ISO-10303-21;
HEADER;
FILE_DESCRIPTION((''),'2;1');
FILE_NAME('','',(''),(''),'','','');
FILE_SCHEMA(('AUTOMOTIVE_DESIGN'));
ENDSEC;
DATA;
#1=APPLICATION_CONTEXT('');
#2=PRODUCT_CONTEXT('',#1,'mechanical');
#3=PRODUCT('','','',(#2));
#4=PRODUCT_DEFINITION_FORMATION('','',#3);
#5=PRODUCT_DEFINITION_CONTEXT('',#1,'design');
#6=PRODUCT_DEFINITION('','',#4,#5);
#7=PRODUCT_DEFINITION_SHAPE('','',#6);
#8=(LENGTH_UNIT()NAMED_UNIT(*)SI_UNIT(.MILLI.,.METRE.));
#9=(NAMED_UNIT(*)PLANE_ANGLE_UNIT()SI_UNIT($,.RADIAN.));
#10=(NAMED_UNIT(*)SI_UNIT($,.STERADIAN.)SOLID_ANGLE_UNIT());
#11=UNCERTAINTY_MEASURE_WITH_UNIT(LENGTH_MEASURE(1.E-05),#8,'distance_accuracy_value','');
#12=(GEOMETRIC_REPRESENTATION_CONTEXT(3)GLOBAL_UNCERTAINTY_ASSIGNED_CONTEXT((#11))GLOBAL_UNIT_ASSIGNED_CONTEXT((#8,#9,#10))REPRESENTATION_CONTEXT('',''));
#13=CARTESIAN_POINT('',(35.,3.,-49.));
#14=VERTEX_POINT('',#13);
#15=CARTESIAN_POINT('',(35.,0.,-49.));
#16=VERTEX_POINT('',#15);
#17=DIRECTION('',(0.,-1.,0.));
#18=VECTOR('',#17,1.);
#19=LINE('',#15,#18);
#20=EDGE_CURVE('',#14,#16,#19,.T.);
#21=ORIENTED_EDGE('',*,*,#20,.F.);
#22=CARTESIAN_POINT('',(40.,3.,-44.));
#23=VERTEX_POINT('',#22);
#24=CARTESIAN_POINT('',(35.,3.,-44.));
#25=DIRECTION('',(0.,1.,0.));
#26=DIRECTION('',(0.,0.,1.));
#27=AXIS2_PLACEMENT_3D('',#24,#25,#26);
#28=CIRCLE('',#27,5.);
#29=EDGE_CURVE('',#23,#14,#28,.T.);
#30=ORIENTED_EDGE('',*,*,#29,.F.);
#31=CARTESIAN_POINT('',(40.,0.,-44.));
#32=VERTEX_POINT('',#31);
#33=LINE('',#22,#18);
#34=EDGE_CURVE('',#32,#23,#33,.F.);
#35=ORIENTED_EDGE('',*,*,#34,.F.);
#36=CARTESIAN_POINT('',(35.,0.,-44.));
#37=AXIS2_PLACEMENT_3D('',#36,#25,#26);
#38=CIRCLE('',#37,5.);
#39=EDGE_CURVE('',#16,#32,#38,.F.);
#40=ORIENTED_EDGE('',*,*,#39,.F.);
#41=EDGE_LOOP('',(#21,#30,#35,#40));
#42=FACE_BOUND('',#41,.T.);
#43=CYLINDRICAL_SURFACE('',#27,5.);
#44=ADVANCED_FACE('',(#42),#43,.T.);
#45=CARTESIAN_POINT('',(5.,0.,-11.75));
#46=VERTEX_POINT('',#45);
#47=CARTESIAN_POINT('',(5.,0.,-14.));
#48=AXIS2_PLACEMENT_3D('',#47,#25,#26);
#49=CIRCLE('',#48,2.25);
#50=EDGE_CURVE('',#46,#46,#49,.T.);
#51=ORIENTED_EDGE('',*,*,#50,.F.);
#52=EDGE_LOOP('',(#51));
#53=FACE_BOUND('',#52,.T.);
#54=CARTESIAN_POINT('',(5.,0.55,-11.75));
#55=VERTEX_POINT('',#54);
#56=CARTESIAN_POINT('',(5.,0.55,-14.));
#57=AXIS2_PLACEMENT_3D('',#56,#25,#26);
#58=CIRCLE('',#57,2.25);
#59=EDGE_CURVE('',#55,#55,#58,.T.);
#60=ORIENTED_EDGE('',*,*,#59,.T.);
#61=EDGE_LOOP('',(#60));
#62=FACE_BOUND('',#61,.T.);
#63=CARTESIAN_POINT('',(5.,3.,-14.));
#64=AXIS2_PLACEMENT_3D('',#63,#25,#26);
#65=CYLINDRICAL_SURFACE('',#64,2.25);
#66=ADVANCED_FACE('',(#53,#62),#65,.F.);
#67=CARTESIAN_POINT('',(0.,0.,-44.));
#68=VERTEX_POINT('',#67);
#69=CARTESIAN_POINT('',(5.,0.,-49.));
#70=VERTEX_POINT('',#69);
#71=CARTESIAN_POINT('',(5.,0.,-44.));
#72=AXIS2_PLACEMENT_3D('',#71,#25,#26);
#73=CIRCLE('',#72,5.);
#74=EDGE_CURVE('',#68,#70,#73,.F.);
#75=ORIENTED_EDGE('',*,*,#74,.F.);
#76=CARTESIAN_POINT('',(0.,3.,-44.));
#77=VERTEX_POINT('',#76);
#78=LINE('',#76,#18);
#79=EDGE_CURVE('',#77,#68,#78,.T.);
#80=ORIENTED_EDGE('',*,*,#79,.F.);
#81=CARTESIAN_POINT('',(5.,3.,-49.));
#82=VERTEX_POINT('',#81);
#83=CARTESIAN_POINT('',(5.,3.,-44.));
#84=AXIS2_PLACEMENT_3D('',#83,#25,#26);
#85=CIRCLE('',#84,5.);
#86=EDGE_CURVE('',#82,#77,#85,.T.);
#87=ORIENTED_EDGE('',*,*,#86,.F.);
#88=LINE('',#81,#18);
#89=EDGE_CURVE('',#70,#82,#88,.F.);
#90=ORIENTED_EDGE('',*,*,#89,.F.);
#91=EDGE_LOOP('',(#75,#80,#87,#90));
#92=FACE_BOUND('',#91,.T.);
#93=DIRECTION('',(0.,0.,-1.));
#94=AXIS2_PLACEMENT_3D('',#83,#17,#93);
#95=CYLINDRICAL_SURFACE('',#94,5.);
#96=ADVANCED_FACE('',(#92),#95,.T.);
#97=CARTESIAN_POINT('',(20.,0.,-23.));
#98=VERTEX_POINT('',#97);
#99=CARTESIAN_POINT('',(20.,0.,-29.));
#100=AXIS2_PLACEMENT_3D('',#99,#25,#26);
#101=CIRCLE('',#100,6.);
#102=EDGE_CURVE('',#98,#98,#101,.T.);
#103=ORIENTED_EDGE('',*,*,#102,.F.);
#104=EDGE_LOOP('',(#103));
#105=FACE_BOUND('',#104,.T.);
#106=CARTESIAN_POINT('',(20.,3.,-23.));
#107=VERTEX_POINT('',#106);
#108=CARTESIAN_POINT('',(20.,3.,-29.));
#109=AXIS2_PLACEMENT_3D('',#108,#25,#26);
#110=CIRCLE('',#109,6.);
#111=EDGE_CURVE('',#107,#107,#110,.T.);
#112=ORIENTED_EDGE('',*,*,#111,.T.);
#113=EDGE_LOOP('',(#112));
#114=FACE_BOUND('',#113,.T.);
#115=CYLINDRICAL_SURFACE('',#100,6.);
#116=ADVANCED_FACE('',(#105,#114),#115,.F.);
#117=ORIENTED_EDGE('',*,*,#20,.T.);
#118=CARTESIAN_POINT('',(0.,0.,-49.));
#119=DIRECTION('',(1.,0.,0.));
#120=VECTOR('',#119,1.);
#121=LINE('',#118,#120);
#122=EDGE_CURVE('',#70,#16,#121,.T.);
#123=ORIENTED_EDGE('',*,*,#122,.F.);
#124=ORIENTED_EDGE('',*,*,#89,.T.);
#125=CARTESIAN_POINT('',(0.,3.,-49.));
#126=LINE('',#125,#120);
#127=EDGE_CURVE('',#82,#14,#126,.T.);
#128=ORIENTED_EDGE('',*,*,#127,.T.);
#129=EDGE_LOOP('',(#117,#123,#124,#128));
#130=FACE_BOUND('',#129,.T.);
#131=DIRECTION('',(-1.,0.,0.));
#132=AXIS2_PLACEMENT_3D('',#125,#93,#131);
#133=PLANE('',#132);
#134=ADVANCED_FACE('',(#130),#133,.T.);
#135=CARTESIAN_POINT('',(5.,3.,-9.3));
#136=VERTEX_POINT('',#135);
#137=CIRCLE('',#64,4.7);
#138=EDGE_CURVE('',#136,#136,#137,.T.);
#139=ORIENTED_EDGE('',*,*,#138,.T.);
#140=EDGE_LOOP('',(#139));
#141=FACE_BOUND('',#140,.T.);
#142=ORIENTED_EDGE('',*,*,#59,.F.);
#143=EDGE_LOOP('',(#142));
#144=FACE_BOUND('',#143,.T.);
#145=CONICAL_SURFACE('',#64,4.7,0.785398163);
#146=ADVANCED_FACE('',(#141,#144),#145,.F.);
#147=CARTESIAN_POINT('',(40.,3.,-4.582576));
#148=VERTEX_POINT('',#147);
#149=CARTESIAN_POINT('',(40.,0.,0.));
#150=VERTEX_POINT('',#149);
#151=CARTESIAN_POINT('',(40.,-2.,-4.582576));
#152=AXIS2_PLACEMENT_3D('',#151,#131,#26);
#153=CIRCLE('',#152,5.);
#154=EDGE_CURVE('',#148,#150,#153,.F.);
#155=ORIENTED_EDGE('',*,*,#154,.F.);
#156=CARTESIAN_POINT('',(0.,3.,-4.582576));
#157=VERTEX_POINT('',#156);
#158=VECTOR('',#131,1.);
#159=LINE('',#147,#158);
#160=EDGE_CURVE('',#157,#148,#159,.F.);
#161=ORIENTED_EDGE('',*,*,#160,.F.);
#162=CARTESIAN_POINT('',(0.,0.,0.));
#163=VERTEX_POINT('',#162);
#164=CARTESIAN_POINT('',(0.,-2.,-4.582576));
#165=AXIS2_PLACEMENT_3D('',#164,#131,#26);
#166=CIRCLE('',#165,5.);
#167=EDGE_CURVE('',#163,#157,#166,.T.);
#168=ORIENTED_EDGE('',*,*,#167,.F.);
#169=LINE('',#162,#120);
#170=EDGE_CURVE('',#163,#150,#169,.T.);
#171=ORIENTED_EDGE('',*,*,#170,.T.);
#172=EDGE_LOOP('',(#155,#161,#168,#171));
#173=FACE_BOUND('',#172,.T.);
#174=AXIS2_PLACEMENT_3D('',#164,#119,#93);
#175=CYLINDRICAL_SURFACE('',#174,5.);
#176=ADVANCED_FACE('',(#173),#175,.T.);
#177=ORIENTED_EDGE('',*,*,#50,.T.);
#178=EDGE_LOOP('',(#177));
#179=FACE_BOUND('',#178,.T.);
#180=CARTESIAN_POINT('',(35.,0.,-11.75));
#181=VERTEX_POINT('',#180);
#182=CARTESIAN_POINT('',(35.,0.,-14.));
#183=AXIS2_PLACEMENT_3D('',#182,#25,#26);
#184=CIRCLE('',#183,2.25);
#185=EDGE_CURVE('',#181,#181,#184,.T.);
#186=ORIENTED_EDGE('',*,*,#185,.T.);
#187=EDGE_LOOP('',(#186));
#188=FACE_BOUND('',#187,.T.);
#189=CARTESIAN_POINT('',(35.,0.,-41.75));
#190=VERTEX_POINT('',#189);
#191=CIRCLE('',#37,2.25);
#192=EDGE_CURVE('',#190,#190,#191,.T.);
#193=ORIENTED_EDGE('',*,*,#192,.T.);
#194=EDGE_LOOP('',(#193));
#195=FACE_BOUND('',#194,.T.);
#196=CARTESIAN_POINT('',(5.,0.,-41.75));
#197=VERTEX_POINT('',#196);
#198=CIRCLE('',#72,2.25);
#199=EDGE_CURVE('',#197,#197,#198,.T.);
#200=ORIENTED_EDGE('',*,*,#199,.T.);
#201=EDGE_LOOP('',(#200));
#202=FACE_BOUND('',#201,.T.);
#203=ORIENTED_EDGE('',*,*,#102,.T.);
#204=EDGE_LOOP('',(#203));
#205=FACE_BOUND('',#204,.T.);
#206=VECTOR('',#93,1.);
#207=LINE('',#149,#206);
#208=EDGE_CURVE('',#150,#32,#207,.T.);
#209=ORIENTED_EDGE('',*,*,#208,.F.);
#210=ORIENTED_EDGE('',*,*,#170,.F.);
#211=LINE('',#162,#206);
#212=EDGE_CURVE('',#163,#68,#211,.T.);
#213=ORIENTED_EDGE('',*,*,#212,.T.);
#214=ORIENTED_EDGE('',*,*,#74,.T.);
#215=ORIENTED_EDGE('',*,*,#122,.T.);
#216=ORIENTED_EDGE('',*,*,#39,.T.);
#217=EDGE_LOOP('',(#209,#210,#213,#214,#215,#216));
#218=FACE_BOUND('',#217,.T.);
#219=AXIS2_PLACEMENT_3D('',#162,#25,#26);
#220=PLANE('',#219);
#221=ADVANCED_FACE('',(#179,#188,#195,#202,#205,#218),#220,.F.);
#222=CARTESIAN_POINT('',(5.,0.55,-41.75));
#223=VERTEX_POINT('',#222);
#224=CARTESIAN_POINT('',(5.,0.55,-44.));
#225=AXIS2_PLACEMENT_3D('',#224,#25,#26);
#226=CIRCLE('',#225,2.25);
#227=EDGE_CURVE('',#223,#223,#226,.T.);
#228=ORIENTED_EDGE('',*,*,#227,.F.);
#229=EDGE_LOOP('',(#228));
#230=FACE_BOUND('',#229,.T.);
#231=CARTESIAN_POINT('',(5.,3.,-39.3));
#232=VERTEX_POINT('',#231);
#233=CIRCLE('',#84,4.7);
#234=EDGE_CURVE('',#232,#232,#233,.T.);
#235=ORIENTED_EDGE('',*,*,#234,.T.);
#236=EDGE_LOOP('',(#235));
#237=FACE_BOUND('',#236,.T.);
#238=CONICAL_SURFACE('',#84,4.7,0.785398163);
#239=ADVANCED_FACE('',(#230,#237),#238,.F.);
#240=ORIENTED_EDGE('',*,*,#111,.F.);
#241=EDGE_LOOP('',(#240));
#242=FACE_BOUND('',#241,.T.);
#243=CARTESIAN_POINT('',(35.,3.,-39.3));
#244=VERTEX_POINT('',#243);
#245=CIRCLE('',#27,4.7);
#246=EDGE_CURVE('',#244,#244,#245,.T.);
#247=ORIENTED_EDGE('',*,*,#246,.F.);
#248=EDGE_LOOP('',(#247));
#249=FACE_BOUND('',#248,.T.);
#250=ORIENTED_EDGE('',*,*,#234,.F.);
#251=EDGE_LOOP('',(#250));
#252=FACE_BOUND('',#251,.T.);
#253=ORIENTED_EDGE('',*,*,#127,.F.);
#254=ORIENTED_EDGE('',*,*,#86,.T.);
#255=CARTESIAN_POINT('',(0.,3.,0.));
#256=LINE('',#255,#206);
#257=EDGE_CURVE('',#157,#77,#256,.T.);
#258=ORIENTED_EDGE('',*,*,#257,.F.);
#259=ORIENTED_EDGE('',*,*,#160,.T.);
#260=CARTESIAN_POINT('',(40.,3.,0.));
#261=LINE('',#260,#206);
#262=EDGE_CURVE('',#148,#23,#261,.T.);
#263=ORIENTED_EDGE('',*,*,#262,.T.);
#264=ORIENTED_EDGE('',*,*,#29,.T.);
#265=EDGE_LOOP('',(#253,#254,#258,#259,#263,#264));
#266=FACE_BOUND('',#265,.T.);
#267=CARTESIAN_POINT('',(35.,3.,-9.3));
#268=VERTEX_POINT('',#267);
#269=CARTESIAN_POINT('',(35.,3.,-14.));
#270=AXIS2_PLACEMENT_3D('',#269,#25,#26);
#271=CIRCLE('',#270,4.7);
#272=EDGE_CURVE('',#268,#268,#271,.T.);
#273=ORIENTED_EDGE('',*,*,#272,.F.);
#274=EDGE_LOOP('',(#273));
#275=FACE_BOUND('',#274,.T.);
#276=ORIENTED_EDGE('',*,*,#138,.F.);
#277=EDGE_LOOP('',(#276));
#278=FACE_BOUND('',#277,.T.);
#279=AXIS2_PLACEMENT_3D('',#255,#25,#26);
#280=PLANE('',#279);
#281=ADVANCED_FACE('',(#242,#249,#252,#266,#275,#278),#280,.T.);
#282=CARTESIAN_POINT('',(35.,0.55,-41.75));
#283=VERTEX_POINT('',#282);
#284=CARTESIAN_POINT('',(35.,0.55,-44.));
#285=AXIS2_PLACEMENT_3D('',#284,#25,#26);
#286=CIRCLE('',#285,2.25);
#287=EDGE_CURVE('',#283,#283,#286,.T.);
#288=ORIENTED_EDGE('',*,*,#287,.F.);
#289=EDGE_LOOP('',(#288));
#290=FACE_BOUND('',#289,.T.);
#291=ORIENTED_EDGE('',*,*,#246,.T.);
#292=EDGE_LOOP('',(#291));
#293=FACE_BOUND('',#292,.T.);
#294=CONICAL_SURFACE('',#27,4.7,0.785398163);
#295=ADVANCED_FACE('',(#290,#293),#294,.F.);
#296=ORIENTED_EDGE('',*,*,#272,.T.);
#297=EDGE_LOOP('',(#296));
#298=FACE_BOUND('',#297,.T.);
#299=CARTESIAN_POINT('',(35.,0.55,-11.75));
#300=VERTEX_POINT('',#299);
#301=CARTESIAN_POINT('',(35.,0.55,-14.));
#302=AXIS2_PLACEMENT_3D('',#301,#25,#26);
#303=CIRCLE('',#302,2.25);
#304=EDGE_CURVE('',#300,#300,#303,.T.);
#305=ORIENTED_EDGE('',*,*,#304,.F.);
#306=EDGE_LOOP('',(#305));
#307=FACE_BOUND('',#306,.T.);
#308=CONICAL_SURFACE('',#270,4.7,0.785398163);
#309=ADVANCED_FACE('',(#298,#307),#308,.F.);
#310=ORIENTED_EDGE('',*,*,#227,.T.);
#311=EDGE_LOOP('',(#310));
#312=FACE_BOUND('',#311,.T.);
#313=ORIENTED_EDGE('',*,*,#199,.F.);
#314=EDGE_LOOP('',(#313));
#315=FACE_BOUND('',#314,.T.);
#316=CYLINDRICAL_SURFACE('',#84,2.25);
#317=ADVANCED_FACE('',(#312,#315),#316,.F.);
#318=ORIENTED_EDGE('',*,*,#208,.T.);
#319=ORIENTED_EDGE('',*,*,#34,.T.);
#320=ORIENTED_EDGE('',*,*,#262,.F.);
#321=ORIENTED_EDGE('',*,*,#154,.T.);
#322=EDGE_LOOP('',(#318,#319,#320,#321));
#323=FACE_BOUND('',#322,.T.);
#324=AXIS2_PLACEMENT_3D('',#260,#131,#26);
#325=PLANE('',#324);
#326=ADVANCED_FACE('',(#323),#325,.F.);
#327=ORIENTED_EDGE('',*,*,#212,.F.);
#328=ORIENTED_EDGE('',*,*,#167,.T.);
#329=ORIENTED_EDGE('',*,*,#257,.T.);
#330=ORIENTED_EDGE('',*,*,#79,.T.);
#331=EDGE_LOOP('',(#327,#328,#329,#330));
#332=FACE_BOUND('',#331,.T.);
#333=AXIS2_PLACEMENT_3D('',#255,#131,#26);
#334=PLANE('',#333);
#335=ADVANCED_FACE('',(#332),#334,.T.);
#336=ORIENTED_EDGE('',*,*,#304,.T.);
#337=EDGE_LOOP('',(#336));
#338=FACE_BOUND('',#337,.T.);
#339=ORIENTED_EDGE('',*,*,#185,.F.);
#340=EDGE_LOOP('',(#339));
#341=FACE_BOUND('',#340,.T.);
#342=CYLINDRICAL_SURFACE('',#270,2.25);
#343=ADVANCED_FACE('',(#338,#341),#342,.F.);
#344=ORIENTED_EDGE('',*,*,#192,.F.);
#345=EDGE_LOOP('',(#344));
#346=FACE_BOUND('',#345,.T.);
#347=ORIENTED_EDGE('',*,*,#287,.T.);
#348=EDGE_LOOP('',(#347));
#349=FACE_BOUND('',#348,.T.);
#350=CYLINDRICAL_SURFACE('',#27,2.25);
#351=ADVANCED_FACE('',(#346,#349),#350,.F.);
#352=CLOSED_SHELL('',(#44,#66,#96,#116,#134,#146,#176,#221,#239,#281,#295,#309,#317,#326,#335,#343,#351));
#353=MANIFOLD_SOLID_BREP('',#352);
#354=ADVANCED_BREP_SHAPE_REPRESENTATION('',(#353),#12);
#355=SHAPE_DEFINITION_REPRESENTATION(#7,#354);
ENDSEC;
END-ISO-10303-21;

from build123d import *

# Parameters (mm, degrees)
SKETCH1_W                                      = 40
SKETCH1_H                                      = 49
SKETCH1_W_2                                    = 30
SKETCH1_H_2                                    = 30
BOSS_EXTRUDE1_DEPTH                            = 3
FILLET1_R                                      = 5
CSK_FOR_M4_FLAT_HEAD_MACHINE_SCREW2_AT_2_COUNT = 2
CSK_FOR_M4_FLAT_HEAD_MACHINE_SCREW2_AT_2_PITCH = 30
CSK_FOR_M4_FLAT_HEAD_MACHINE_SCREW2_AT_3_COUNT = 2
CSK_FOR_M4_FLAT_HEAD_MACHINE_SCREW2_AT_3_PITCH = 42.426406871
CSK_FOR_M4_FLAT_HEAD_MACHINE_SCREW2_AT_4_COUNT = 2
CSK_FOR_M4_FLAT_HEAD_MACHINE_SCREW2_AT_4_PITCH = 30
SKETCH4_R                                      = 6
CUT_EXTRUDE1_DEPTH                             = 3


with BuildPart() as part:
    # Sketch1 → Boss-Extrude1 (new body)
    # profile 1 of 2: a face of its own
    with BuildSketch(Plane(origin=(0, 0, 0), x_dir=(1, 0, 0), z_dir=(0, 1, 0))):
        with Locations((20, 24.5)):
            Rectangle(SKETCH1_W, SKETCH1_H)
        with Locations((20, 29)):
            Rectangle(SKETCH1_W_2, SKETCH1_H_2, mode=Mode.SUBTRACT)
    # profile 2 of 2: a face of its own
    with BuildSketch(Plane(origin=(0, 0, 0), x_dir=(1, 0, 0), z_dir=(0, 1, 0))):
        with Locations((20, 29)):
            Rectangle(SKETCH1_W_2, SKETCH1_H_2)
    extrude(amount=BOSS_EXTRUDE1_DEPTH)

    # Fillet1
    # the kernel refuses this fillet: 5 mm, written as the material it takes off along each edge
    with BuildSketch(Plane(origin=(-11.456439237, 3, 0), x_dir=(0, -1, 0), z_dir=(1, 0, 0))) as fillet1_piece_1:
        with BuildLine():
            CenterArc((5, 4.582575695), FILLET1_R, 180, 66.421821522)
            Line((0, 4.582575695), (-0.1, 4.582575695))
            Line((-0.1, 4.582575695), (-0.1, 0))
            Line((-0.1, 0), (0, -0.1))
            ThreePointArc((0, -0.1), (1.5, -0.1), (2.96, -0.091651514))
            Line((2.96, -0.091651514), (3, 0))
        make_face()
    extrude(amount=62.912878475, mode=Mode.SUBTRACT)
    with BuildSketch(Plane(origin=(0, -12.5, -49), x_dir=(0, 0, 1), z_dir=(0, 1, 0))) as fillet1_piece_2:
        with BuildLine():
            CenterArc((FILLET1_R, FILLET1_R), FILLET1_R, 180, 90)
            Line((0, FILLET1_R), (-FILLET1_R * 0.02, FILLET1_R))
            Line((-FILLET1_R * 0.02, FILLET1_R), (-FILLET1_R * 0.02, -FILLET1_R * 0.02))
            Line((-FILLET1_R * 0.02, -FILLET1_R * 0.02), (FILLET1_R, -FILLET1_R * 0.02))
            Line((FILLET1_R, -FILLET1_R * 0.02), (FILLET1_R, 0))
        make_face()
    extrude(amount=28, mode=Mode.SUBTRACT)
    with BuildSketch(Plane(origin=(40, -12.5, -49), x_dir=(0, 0, 1), z_dir=(0, 1, 0))) as fillet1_piece_3:
        with BuildLine():
            CenterArc((FILLET1_R, -FILLET1_R), FILLET1_R, 90, 90)
            Line((0, -FILLET1_R), (-FILLET1_R * 0.02, -FILLET1_R))
            Line((-FILLET1_R * 0.02, -FILLET1_R), (-FILLET1_R * 0.02, FILLET1_R * 0.02))
            Line((-FILLET1_R * 0.02, FILLET1_R * 0.02), (FILLET1_R, FILLET1_R * 0.02))
            Line((FILLET1_R, FILLET1_R * 0.02), (FILLET1_R, 0))
        make_face()
    extrude(amount=28, mode=Mode.SUBTRACT)

    # Sketch3 → CSK for M4 Flat Head Machine Screw2 (revolve, cut)
    with BuildSketch(Plane(origin=(5, 3, -44), x_dir=(0, 0, 1), z_dir=(1, 0, 0))):
        Polygon((0, 0), (0, 3), (2.25, 3), (2.25, 2.45), (4.7, 0), align=None)
    csk_for_m4_flat_head_machine_screw2 = revolve(axis=Axis((5, 9.35, -44), (0, -1, 0)), mode=Mode.SUBTRACT)

    # CSK for M4 Flat Head Machine Screw2 at 2: CSK for M4 Flat Head Machine Screw2 ×2
    with Locations(*[(i * CSK_FOR_M4_FLAT_HEAD_MACHINE_SCREW2_AT_2_PITCH, 0, 0) for i in range(1, CSK_FOR_M4_FLAT_HEAD_MACHINE_SCREW2_AT_2_COUNT)]):
        add(csk_for_m4_flat_head_machine_screw2, mode=Mode.SUBTRACT)

    # CSK for M4 Flat Head Machine Screw2 at 3: CSK for M4 Flat Head Machine Screw2 ×2
    with Locations(*[Vector(0.7071067811865474, 0, 0.7071067811865477) * (i * CSK_FOR_M4_FLAT_HEAD_MACHINE_SCREW2_AT_3_PITCH) for i in range(1, CSK_FOR_M4_FLAT_HEAD_MACHINE_SCREW2_AT_3_COUNT)]):
        add(csk_for_m4_flat_head_machine_screw2, mode=Mode.SUBTRACT)

    # CSK for M4 Flat Head Machine Screw2 at 4: CSK for M4 Flat Head Machine Screw2 ×2
    with Locations(*[(0, 0, i * CSK_FOR_M4_FLAT_HEAD_MACHINE_SCREW2_AT_4_PITCH) for i in range(1, CSK_FOR_M4_FLAT_HEAD_MACHINE_SCREW2_AT_4_COUNT)]):
        add(csk_for_m4_flat_head_machine_screw2, mode=Mode.SUBTRACT)

    # Sketch4 → Cut-Extrude1 (cut)
    with BuildSketch(Plane(origin=(0, 3, 0), x_dir=(1, 0, 0), z_dir=(0, 1, 0))):
        with Locations(Location((20, 29, 0), (0, 0, 270))):
            Circle(SKETCH4_R)
    extrude(amount=-CUT_EXTRUDE1_DEPTH, mode=Mode.SUBTRACT)


solid = part.part
